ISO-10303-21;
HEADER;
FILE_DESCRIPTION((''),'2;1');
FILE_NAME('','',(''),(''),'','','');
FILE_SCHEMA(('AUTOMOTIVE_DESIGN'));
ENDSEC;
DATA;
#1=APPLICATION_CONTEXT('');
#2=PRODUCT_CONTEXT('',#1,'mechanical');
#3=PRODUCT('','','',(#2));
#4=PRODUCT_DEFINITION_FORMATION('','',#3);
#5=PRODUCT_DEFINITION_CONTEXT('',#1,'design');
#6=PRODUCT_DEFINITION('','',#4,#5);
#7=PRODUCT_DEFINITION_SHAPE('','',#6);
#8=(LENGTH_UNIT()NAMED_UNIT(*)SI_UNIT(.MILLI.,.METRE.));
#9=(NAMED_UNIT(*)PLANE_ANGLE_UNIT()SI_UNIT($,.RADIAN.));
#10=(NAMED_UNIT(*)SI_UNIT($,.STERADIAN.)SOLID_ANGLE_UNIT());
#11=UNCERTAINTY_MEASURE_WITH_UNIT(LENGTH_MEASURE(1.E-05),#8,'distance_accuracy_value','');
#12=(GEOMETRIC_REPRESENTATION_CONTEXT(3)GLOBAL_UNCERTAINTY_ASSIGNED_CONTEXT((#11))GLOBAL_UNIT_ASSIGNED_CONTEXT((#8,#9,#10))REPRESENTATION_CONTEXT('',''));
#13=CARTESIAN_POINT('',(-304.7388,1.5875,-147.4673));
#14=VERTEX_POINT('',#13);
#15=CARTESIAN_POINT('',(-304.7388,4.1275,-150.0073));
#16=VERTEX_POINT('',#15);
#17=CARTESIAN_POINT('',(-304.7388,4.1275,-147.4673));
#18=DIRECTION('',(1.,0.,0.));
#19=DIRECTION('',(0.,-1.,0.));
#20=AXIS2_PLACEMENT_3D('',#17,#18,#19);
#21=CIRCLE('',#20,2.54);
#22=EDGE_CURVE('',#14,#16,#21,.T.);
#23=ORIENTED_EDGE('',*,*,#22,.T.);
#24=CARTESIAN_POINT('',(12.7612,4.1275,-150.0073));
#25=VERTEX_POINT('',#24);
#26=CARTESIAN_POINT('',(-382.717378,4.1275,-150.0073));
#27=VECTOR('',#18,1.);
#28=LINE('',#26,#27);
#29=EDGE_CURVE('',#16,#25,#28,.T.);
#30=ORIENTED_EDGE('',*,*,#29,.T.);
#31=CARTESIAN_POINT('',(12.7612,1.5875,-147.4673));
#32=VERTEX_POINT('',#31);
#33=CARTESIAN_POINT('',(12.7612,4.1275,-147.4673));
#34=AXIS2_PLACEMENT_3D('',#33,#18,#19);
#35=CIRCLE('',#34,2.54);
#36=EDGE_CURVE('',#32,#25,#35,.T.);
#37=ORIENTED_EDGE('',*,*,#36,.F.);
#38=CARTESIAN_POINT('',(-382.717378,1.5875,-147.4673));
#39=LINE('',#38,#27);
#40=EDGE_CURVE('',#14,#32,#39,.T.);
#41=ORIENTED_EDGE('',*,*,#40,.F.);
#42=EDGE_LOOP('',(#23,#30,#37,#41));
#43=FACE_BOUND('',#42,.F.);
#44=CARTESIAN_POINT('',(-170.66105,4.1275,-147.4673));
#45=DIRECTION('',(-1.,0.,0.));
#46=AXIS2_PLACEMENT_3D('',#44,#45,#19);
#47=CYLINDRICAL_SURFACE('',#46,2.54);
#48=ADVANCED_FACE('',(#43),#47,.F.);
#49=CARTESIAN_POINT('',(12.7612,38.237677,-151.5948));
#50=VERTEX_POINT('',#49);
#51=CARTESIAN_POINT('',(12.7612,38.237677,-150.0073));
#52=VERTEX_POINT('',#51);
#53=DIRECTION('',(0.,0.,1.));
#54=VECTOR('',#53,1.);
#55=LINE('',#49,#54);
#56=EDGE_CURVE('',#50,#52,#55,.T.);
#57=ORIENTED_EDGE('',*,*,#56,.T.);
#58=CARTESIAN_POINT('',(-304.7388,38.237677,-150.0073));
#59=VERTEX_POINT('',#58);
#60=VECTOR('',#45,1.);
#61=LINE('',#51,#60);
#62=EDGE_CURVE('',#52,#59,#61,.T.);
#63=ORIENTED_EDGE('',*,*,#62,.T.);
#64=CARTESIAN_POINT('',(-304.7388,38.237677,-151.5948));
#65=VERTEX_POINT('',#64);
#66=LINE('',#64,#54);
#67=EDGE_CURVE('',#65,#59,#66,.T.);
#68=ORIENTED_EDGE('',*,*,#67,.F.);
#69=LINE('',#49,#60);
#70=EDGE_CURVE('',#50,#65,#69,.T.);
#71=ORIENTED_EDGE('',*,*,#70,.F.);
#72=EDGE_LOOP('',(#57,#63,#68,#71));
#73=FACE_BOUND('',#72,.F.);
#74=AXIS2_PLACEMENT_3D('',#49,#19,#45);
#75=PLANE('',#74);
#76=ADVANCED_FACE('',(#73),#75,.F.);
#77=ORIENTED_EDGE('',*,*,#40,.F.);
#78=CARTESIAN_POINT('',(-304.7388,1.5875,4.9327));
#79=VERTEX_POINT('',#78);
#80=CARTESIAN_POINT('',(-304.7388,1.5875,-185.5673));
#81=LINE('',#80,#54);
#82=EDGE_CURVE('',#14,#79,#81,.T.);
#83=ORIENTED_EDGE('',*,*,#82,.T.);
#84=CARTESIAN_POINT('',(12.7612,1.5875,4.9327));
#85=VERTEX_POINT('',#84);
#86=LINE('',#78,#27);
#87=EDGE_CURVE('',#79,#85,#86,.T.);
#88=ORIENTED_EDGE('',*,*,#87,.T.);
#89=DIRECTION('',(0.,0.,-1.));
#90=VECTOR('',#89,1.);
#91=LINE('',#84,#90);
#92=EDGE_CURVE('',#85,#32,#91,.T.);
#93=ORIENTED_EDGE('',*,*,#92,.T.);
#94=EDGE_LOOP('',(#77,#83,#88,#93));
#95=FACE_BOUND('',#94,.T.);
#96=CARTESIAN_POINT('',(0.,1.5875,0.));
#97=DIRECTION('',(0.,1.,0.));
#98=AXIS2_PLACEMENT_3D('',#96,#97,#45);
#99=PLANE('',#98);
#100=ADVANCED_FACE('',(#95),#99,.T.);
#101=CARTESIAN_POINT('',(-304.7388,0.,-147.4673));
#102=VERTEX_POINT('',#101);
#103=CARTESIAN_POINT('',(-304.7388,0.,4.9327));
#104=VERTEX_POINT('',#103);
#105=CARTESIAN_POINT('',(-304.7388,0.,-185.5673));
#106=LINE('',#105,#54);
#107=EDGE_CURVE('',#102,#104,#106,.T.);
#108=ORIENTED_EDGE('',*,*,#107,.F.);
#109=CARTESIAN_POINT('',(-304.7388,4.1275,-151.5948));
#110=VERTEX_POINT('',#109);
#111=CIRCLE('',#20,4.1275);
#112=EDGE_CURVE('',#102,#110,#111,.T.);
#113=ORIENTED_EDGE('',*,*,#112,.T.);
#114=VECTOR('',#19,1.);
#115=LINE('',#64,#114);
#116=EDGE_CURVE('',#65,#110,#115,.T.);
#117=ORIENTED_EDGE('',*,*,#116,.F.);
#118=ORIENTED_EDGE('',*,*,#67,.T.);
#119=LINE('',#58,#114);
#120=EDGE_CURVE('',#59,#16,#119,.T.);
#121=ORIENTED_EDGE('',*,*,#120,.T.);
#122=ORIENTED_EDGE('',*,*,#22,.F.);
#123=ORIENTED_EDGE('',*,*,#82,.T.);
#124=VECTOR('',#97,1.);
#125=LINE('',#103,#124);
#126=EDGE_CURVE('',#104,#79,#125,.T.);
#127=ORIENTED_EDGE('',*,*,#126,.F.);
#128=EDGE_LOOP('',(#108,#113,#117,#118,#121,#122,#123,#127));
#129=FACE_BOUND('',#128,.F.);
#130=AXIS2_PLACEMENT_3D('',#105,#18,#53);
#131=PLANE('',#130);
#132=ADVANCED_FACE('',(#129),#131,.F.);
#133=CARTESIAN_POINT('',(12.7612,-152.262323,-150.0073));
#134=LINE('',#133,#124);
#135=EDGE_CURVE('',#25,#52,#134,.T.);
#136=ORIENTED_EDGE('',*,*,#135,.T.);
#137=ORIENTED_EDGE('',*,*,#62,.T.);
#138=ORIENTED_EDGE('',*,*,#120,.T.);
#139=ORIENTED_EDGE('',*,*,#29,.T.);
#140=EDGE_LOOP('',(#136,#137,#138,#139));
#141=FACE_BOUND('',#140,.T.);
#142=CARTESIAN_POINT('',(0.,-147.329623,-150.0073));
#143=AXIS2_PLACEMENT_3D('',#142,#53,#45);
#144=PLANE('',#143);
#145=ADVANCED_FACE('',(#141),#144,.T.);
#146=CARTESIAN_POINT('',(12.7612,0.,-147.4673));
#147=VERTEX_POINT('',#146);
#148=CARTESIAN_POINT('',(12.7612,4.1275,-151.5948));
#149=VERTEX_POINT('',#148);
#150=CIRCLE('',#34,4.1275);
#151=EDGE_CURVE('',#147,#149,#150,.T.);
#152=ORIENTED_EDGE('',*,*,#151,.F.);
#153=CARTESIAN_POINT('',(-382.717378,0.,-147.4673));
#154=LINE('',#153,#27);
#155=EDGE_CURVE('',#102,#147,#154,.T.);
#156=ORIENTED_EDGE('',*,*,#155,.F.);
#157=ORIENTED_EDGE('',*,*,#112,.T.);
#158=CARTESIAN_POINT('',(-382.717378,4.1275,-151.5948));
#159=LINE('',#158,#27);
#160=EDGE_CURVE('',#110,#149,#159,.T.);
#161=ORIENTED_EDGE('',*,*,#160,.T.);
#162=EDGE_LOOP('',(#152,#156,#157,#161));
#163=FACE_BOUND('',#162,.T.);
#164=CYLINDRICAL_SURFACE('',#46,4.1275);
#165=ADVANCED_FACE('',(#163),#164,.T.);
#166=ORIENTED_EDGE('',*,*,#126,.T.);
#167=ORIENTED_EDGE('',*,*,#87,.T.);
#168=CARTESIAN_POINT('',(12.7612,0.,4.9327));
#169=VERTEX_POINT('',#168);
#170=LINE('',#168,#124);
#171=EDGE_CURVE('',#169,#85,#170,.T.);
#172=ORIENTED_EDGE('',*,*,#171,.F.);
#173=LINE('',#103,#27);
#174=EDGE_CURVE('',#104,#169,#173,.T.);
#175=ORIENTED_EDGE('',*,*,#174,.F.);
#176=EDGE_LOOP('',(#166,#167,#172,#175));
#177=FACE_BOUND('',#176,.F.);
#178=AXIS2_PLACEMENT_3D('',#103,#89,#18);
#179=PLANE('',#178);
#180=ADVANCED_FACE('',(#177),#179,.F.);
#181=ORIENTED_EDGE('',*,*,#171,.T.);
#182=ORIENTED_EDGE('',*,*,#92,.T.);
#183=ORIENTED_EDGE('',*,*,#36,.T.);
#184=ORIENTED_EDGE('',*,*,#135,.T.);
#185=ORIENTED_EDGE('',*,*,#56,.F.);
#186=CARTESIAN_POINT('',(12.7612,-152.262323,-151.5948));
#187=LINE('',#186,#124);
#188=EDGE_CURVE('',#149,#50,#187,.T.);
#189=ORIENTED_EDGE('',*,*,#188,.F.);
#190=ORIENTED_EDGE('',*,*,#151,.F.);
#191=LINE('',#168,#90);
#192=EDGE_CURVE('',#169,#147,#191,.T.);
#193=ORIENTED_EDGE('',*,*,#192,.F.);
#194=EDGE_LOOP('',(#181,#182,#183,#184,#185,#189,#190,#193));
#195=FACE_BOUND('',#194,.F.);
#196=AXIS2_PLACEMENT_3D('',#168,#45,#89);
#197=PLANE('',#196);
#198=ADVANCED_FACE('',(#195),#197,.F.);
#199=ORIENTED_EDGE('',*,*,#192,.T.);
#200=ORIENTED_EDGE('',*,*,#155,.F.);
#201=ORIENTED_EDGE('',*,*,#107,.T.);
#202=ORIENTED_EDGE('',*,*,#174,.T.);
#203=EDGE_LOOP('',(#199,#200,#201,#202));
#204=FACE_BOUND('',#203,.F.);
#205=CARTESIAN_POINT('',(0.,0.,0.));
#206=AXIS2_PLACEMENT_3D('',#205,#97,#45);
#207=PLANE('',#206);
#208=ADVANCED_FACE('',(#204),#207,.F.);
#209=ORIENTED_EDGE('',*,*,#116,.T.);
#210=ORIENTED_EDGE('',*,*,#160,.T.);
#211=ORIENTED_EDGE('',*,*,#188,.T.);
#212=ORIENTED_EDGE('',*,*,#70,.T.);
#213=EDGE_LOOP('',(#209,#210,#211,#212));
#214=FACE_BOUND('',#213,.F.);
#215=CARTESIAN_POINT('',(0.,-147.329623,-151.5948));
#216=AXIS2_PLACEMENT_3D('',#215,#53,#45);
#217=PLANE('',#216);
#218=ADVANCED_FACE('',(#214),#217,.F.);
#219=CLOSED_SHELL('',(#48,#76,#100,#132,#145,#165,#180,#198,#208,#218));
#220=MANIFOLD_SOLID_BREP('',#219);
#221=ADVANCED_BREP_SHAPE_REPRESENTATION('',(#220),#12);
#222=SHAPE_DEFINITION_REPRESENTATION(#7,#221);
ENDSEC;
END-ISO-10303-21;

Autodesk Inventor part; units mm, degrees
ref_plane "YZ Plane" through (0, 0, 0) normal (1, 0, 0) x (0, 1, 0)
ref_plane "XZ Plane" through (0, 0, 0) normal (0, 1, 0) x (-1, 0, 0)
ref_plane "XY Plane" through (0, 0, 0) normal (0, 0, 1) x (1, 0, 0)
sketch "Sketch1" plane through (0, 0, 0) normal (0, 1, 0) x (-1, 0, 0)
  line L0 (-12.7612, -185.5673) -> (304.7388, -185.5673)
  line L1 (304.7388, -185.5673) -> (304.7388, 4.9327)
  line L2 (304.7388, 4.9327) -> (-12.7612, 4.9327)
  line L3 (-12.7612, 4.9327) -> (-12.7612, -185.5673)
  point P0 (0, 0)
  dimension "d0" = 317.5
  dimension "d1" = 190.5
extrude "Extrusion1" add sketch "Sketch1" along normal blind 1.5875
sketch "Sketch2" plane through (0, 1.5875, 0) normal (0, 1, 0) x (1, 0, 0)
  line L0 (12.7612, 185.5673) -> (-304.7388, 185.5673) projected
  line L1 (12.7612, -4.9327) -> (12.7612, 185.5673) projected
  line L2 (-341.3221, 147.4673) -> (43.4131, 147.4673)
  point P0 (0, 0)
  dimension "d4" = 38.1
bend part "Bend Part1" radius 2.54 angle 90 line through (-341.3221, 1.5875, -147.4673) along (1, 0, 0) centre toward (0, 1, 0) moving side (0, 0, -1) both sides no
properties part number "battery holder poly"
